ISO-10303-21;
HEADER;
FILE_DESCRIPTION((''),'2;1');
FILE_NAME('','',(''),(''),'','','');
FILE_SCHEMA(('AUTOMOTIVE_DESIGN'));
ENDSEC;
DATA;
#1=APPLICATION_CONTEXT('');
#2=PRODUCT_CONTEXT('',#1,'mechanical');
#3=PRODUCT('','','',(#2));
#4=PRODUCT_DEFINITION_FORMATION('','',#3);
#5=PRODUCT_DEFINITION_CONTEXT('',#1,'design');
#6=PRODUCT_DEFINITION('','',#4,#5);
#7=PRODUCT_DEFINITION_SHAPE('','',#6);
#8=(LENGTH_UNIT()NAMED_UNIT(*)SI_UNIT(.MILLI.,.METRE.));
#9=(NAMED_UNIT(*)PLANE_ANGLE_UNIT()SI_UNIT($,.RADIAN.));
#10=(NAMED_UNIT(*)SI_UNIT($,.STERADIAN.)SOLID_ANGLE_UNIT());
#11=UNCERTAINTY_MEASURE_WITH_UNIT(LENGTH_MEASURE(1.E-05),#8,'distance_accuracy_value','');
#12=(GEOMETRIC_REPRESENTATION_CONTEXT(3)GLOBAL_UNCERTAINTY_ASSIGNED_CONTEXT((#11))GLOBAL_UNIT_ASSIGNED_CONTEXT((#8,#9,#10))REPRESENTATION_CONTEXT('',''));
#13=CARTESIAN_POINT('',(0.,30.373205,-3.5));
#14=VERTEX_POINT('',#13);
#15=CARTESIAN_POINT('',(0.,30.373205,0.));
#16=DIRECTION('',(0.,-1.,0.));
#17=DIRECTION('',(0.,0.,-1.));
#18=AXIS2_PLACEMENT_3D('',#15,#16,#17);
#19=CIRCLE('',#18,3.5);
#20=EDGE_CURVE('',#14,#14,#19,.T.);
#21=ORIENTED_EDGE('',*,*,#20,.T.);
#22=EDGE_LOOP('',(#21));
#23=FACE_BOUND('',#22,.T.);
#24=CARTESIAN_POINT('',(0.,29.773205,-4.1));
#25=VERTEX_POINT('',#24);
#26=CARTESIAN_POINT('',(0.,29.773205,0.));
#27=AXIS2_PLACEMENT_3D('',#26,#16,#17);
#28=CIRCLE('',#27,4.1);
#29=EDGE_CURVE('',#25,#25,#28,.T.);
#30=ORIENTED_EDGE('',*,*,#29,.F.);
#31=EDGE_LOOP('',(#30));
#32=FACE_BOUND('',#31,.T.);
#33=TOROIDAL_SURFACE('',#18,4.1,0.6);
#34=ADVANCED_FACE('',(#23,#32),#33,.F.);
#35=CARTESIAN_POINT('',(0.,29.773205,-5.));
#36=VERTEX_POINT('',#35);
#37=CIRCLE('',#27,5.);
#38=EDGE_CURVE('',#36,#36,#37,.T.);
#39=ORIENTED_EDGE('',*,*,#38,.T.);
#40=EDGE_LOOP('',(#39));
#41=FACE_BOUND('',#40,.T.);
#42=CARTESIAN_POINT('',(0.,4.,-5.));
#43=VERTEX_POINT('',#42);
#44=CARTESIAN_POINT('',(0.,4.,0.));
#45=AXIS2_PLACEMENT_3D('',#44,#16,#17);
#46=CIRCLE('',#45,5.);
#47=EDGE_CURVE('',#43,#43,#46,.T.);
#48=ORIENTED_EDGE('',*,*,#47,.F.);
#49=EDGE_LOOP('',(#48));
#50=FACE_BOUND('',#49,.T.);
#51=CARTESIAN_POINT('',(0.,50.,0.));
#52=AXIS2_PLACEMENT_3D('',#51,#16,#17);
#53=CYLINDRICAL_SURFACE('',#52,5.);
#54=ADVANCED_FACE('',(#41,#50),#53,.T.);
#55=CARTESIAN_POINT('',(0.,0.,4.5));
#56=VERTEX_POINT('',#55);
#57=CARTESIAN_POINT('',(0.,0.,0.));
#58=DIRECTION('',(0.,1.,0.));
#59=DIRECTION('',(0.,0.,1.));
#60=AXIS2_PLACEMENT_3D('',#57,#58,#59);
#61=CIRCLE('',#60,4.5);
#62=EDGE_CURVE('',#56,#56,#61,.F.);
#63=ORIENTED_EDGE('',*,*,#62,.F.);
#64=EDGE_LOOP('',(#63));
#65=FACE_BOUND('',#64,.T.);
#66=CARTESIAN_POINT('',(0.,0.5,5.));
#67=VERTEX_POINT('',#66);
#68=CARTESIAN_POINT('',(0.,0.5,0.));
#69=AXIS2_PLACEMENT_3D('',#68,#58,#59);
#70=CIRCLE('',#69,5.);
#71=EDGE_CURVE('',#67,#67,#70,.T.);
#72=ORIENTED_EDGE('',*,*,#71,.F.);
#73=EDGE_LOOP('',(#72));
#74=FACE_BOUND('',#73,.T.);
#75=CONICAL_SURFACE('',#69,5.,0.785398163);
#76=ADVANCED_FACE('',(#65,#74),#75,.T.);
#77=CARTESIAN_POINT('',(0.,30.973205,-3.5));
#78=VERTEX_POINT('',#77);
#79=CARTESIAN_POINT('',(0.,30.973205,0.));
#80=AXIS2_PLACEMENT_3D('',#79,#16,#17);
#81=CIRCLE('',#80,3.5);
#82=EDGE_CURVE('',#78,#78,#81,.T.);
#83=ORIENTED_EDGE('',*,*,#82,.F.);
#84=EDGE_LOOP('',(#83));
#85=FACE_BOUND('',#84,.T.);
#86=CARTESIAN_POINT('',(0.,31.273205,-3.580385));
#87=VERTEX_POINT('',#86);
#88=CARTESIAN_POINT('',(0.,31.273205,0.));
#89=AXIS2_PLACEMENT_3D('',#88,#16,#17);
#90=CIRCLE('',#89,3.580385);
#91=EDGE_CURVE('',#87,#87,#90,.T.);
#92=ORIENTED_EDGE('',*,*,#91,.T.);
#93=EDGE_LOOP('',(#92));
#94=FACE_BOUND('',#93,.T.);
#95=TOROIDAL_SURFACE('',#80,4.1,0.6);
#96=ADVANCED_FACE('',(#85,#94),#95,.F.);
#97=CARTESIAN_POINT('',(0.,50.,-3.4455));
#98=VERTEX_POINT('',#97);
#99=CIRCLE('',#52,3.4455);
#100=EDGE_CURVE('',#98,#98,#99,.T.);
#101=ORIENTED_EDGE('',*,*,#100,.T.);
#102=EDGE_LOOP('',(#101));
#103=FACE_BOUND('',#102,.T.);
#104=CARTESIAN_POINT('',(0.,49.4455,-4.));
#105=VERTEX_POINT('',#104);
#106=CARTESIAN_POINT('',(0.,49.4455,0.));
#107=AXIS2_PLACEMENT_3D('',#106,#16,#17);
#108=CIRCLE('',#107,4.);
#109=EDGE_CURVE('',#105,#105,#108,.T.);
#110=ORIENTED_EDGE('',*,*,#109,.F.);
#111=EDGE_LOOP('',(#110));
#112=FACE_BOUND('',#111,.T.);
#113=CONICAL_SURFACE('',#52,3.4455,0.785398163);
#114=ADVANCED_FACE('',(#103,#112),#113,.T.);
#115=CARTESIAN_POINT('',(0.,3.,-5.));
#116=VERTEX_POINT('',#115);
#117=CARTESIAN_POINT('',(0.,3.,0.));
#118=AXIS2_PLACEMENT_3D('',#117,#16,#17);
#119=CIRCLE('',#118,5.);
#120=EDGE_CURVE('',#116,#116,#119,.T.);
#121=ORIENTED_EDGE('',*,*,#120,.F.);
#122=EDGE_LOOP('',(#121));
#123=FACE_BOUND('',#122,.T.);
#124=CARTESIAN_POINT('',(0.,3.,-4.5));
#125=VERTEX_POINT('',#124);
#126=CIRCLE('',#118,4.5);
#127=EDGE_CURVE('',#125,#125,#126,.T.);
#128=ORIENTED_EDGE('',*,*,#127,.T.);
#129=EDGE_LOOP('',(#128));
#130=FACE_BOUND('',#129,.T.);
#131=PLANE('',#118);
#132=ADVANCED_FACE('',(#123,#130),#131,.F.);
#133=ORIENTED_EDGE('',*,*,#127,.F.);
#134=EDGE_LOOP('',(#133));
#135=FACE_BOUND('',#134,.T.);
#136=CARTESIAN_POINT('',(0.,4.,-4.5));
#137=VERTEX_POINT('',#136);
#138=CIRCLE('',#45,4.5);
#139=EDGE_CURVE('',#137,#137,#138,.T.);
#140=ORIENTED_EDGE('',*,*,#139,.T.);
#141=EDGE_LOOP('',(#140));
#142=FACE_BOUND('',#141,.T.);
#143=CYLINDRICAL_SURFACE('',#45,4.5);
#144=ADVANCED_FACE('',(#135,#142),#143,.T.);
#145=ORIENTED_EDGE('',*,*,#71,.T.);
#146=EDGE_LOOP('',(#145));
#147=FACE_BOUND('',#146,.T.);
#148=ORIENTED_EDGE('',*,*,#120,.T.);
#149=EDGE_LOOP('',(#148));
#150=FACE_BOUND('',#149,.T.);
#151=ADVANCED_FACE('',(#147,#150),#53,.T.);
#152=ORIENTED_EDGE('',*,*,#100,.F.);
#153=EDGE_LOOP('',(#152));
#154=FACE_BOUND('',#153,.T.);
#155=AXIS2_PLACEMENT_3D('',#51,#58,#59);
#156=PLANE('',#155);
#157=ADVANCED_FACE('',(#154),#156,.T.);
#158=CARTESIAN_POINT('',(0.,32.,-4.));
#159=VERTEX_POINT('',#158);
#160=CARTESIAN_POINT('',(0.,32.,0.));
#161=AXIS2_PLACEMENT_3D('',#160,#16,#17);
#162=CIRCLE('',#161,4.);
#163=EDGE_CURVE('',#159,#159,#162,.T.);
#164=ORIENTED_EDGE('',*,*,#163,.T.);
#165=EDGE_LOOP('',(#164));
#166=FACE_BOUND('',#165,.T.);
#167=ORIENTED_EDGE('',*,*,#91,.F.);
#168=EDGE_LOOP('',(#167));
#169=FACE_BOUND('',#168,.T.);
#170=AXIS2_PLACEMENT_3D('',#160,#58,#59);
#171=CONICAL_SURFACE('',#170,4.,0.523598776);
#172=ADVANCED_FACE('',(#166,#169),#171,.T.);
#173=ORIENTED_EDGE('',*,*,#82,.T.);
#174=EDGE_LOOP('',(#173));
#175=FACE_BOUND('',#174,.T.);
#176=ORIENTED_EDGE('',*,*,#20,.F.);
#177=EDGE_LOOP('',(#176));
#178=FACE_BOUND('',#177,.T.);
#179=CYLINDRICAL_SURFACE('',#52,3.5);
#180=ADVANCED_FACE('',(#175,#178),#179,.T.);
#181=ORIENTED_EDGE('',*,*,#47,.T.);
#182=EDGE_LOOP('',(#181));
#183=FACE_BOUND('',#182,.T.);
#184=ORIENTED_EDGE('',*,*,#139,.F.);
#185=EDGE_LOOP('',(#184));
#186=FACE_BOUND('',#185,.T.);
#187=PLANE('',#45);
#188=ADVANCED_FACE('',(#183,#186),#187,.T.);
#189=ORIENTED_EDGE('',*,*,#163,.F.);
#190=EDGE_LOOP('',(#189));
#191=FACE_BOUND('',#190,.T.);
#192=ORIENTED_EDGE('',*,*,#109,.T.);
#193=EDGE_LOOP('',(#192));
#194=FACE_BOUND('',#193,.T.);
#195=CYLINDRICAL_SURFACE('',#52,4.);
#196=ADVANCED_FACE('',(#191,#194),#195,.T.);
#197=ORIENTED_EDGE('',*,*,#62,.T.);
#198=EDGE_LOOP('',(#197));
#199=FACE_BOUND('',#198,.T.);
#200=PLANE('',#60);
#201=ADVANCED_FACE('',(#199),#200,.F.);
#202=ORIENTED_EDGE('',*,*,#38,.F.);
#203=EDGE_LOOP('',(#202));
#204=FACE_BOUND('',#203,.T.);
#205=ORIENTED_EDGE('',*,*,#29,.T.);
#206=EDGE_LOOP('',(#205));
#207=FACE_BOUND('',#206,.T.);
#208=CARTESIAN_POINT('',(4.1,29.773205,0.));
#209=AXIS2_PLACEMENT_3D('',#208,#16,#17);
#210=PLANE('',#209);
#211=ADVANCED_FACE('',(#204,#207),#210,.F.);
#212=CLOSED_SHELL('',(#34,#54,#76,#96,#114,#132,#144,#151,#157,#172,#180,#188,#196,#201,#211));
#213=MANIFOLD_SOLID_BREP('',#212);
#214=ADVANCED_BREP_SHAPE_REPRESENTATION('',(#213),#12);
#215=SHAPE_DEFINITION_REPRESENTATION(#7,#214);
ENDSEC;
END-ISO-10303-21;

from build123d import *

# Parameters (mm, degrees)
SKETCH1_R           = 5
BOSS_EXTRUDE1_DEPTH = 50
CHAMFER1_SIZE       = 0.5
CUT_EXTRUDE2_START  = -3
SKETCH7_R           = 5
SKETCH7_R_2         = 4.5
CUT_EXTRUDE2_DEPTH  = 1


# Read off the part's stored shape, not the designer's step: M8x1.0 Machine Threads Stud1
with BuildPart() as part:
    # Sketch1 → Boss-Extrude1 (new body)
    with BuildSketch(Plane(origin=(0, 0, 0), x_dir=(1, 0, 0), z_dir=(0, 1, 0))):
        with Locations(Location((0, 0, 0), (0, 0, 270))):
            Circle(SKETCH1_R)
    extrude(amount=BOSS_EXTRUDE1_DEPTH)

    # M8x1.0 Machine Threads Stud1 outline → M8x1.0 Machine Threads Stud1 (revolve, cut)
    with BuildSketch(Plane.XY):
        with BuildLine():
            Line((5, 50), (3.4455, 50))
            Line((3.4455, 50), (4, 49.4455))
            Line((4, 49.4455), (4, 32))
            Line((4, 32), (3.580384758, 31.273205081))
            ThreePointArc((3.580384758, 31.273205081), (3.520444504, 31.128496508), (3.5, 30.973205081))
            Line((3.5, 30.973205081), (3.5, 30.373205081))
            ThreePointArc((3.5, 30.373205081), (3.675735931, 29.948941012), (4.1, 29.773205081))
            Line((4.1, 29.773205081), (5, 29.773205081))
            Line((5, 29.773205081), (5, 50))
        make_face()
    revolve(axis=Axis((0, 0, 0), (0, 1, 0)), mode=Mode.SUBTRACT)

    # Chamfer1
    chamfer1_edges = [part.edges().sort_by_distance(p)[0] for p in [
        (0, 0, -5),
    ]]
    chamfer(chamfer1_edges, length=CHAMFER1_SIZE)

    # Sketch7 → Cut-Extrude2 (cut)
    with BuildSketch(Plane.XZ.offset(CUT_EXTRUDE2_START)):
        with Locations(Location((0, 0, 0), (0, 0, 270))):
            Circle(SKETCH7_R)
        with Locations(Location((0, 0, 0), (0, 0, 270))):
            Circle(SKETCH7_R_2, mode=Mode.SUBTRACT)
    extrude(amount=-CUT_EXTRUDE2_DEPTH, mode=Mode.SUBTRACT)


solid = part.part
